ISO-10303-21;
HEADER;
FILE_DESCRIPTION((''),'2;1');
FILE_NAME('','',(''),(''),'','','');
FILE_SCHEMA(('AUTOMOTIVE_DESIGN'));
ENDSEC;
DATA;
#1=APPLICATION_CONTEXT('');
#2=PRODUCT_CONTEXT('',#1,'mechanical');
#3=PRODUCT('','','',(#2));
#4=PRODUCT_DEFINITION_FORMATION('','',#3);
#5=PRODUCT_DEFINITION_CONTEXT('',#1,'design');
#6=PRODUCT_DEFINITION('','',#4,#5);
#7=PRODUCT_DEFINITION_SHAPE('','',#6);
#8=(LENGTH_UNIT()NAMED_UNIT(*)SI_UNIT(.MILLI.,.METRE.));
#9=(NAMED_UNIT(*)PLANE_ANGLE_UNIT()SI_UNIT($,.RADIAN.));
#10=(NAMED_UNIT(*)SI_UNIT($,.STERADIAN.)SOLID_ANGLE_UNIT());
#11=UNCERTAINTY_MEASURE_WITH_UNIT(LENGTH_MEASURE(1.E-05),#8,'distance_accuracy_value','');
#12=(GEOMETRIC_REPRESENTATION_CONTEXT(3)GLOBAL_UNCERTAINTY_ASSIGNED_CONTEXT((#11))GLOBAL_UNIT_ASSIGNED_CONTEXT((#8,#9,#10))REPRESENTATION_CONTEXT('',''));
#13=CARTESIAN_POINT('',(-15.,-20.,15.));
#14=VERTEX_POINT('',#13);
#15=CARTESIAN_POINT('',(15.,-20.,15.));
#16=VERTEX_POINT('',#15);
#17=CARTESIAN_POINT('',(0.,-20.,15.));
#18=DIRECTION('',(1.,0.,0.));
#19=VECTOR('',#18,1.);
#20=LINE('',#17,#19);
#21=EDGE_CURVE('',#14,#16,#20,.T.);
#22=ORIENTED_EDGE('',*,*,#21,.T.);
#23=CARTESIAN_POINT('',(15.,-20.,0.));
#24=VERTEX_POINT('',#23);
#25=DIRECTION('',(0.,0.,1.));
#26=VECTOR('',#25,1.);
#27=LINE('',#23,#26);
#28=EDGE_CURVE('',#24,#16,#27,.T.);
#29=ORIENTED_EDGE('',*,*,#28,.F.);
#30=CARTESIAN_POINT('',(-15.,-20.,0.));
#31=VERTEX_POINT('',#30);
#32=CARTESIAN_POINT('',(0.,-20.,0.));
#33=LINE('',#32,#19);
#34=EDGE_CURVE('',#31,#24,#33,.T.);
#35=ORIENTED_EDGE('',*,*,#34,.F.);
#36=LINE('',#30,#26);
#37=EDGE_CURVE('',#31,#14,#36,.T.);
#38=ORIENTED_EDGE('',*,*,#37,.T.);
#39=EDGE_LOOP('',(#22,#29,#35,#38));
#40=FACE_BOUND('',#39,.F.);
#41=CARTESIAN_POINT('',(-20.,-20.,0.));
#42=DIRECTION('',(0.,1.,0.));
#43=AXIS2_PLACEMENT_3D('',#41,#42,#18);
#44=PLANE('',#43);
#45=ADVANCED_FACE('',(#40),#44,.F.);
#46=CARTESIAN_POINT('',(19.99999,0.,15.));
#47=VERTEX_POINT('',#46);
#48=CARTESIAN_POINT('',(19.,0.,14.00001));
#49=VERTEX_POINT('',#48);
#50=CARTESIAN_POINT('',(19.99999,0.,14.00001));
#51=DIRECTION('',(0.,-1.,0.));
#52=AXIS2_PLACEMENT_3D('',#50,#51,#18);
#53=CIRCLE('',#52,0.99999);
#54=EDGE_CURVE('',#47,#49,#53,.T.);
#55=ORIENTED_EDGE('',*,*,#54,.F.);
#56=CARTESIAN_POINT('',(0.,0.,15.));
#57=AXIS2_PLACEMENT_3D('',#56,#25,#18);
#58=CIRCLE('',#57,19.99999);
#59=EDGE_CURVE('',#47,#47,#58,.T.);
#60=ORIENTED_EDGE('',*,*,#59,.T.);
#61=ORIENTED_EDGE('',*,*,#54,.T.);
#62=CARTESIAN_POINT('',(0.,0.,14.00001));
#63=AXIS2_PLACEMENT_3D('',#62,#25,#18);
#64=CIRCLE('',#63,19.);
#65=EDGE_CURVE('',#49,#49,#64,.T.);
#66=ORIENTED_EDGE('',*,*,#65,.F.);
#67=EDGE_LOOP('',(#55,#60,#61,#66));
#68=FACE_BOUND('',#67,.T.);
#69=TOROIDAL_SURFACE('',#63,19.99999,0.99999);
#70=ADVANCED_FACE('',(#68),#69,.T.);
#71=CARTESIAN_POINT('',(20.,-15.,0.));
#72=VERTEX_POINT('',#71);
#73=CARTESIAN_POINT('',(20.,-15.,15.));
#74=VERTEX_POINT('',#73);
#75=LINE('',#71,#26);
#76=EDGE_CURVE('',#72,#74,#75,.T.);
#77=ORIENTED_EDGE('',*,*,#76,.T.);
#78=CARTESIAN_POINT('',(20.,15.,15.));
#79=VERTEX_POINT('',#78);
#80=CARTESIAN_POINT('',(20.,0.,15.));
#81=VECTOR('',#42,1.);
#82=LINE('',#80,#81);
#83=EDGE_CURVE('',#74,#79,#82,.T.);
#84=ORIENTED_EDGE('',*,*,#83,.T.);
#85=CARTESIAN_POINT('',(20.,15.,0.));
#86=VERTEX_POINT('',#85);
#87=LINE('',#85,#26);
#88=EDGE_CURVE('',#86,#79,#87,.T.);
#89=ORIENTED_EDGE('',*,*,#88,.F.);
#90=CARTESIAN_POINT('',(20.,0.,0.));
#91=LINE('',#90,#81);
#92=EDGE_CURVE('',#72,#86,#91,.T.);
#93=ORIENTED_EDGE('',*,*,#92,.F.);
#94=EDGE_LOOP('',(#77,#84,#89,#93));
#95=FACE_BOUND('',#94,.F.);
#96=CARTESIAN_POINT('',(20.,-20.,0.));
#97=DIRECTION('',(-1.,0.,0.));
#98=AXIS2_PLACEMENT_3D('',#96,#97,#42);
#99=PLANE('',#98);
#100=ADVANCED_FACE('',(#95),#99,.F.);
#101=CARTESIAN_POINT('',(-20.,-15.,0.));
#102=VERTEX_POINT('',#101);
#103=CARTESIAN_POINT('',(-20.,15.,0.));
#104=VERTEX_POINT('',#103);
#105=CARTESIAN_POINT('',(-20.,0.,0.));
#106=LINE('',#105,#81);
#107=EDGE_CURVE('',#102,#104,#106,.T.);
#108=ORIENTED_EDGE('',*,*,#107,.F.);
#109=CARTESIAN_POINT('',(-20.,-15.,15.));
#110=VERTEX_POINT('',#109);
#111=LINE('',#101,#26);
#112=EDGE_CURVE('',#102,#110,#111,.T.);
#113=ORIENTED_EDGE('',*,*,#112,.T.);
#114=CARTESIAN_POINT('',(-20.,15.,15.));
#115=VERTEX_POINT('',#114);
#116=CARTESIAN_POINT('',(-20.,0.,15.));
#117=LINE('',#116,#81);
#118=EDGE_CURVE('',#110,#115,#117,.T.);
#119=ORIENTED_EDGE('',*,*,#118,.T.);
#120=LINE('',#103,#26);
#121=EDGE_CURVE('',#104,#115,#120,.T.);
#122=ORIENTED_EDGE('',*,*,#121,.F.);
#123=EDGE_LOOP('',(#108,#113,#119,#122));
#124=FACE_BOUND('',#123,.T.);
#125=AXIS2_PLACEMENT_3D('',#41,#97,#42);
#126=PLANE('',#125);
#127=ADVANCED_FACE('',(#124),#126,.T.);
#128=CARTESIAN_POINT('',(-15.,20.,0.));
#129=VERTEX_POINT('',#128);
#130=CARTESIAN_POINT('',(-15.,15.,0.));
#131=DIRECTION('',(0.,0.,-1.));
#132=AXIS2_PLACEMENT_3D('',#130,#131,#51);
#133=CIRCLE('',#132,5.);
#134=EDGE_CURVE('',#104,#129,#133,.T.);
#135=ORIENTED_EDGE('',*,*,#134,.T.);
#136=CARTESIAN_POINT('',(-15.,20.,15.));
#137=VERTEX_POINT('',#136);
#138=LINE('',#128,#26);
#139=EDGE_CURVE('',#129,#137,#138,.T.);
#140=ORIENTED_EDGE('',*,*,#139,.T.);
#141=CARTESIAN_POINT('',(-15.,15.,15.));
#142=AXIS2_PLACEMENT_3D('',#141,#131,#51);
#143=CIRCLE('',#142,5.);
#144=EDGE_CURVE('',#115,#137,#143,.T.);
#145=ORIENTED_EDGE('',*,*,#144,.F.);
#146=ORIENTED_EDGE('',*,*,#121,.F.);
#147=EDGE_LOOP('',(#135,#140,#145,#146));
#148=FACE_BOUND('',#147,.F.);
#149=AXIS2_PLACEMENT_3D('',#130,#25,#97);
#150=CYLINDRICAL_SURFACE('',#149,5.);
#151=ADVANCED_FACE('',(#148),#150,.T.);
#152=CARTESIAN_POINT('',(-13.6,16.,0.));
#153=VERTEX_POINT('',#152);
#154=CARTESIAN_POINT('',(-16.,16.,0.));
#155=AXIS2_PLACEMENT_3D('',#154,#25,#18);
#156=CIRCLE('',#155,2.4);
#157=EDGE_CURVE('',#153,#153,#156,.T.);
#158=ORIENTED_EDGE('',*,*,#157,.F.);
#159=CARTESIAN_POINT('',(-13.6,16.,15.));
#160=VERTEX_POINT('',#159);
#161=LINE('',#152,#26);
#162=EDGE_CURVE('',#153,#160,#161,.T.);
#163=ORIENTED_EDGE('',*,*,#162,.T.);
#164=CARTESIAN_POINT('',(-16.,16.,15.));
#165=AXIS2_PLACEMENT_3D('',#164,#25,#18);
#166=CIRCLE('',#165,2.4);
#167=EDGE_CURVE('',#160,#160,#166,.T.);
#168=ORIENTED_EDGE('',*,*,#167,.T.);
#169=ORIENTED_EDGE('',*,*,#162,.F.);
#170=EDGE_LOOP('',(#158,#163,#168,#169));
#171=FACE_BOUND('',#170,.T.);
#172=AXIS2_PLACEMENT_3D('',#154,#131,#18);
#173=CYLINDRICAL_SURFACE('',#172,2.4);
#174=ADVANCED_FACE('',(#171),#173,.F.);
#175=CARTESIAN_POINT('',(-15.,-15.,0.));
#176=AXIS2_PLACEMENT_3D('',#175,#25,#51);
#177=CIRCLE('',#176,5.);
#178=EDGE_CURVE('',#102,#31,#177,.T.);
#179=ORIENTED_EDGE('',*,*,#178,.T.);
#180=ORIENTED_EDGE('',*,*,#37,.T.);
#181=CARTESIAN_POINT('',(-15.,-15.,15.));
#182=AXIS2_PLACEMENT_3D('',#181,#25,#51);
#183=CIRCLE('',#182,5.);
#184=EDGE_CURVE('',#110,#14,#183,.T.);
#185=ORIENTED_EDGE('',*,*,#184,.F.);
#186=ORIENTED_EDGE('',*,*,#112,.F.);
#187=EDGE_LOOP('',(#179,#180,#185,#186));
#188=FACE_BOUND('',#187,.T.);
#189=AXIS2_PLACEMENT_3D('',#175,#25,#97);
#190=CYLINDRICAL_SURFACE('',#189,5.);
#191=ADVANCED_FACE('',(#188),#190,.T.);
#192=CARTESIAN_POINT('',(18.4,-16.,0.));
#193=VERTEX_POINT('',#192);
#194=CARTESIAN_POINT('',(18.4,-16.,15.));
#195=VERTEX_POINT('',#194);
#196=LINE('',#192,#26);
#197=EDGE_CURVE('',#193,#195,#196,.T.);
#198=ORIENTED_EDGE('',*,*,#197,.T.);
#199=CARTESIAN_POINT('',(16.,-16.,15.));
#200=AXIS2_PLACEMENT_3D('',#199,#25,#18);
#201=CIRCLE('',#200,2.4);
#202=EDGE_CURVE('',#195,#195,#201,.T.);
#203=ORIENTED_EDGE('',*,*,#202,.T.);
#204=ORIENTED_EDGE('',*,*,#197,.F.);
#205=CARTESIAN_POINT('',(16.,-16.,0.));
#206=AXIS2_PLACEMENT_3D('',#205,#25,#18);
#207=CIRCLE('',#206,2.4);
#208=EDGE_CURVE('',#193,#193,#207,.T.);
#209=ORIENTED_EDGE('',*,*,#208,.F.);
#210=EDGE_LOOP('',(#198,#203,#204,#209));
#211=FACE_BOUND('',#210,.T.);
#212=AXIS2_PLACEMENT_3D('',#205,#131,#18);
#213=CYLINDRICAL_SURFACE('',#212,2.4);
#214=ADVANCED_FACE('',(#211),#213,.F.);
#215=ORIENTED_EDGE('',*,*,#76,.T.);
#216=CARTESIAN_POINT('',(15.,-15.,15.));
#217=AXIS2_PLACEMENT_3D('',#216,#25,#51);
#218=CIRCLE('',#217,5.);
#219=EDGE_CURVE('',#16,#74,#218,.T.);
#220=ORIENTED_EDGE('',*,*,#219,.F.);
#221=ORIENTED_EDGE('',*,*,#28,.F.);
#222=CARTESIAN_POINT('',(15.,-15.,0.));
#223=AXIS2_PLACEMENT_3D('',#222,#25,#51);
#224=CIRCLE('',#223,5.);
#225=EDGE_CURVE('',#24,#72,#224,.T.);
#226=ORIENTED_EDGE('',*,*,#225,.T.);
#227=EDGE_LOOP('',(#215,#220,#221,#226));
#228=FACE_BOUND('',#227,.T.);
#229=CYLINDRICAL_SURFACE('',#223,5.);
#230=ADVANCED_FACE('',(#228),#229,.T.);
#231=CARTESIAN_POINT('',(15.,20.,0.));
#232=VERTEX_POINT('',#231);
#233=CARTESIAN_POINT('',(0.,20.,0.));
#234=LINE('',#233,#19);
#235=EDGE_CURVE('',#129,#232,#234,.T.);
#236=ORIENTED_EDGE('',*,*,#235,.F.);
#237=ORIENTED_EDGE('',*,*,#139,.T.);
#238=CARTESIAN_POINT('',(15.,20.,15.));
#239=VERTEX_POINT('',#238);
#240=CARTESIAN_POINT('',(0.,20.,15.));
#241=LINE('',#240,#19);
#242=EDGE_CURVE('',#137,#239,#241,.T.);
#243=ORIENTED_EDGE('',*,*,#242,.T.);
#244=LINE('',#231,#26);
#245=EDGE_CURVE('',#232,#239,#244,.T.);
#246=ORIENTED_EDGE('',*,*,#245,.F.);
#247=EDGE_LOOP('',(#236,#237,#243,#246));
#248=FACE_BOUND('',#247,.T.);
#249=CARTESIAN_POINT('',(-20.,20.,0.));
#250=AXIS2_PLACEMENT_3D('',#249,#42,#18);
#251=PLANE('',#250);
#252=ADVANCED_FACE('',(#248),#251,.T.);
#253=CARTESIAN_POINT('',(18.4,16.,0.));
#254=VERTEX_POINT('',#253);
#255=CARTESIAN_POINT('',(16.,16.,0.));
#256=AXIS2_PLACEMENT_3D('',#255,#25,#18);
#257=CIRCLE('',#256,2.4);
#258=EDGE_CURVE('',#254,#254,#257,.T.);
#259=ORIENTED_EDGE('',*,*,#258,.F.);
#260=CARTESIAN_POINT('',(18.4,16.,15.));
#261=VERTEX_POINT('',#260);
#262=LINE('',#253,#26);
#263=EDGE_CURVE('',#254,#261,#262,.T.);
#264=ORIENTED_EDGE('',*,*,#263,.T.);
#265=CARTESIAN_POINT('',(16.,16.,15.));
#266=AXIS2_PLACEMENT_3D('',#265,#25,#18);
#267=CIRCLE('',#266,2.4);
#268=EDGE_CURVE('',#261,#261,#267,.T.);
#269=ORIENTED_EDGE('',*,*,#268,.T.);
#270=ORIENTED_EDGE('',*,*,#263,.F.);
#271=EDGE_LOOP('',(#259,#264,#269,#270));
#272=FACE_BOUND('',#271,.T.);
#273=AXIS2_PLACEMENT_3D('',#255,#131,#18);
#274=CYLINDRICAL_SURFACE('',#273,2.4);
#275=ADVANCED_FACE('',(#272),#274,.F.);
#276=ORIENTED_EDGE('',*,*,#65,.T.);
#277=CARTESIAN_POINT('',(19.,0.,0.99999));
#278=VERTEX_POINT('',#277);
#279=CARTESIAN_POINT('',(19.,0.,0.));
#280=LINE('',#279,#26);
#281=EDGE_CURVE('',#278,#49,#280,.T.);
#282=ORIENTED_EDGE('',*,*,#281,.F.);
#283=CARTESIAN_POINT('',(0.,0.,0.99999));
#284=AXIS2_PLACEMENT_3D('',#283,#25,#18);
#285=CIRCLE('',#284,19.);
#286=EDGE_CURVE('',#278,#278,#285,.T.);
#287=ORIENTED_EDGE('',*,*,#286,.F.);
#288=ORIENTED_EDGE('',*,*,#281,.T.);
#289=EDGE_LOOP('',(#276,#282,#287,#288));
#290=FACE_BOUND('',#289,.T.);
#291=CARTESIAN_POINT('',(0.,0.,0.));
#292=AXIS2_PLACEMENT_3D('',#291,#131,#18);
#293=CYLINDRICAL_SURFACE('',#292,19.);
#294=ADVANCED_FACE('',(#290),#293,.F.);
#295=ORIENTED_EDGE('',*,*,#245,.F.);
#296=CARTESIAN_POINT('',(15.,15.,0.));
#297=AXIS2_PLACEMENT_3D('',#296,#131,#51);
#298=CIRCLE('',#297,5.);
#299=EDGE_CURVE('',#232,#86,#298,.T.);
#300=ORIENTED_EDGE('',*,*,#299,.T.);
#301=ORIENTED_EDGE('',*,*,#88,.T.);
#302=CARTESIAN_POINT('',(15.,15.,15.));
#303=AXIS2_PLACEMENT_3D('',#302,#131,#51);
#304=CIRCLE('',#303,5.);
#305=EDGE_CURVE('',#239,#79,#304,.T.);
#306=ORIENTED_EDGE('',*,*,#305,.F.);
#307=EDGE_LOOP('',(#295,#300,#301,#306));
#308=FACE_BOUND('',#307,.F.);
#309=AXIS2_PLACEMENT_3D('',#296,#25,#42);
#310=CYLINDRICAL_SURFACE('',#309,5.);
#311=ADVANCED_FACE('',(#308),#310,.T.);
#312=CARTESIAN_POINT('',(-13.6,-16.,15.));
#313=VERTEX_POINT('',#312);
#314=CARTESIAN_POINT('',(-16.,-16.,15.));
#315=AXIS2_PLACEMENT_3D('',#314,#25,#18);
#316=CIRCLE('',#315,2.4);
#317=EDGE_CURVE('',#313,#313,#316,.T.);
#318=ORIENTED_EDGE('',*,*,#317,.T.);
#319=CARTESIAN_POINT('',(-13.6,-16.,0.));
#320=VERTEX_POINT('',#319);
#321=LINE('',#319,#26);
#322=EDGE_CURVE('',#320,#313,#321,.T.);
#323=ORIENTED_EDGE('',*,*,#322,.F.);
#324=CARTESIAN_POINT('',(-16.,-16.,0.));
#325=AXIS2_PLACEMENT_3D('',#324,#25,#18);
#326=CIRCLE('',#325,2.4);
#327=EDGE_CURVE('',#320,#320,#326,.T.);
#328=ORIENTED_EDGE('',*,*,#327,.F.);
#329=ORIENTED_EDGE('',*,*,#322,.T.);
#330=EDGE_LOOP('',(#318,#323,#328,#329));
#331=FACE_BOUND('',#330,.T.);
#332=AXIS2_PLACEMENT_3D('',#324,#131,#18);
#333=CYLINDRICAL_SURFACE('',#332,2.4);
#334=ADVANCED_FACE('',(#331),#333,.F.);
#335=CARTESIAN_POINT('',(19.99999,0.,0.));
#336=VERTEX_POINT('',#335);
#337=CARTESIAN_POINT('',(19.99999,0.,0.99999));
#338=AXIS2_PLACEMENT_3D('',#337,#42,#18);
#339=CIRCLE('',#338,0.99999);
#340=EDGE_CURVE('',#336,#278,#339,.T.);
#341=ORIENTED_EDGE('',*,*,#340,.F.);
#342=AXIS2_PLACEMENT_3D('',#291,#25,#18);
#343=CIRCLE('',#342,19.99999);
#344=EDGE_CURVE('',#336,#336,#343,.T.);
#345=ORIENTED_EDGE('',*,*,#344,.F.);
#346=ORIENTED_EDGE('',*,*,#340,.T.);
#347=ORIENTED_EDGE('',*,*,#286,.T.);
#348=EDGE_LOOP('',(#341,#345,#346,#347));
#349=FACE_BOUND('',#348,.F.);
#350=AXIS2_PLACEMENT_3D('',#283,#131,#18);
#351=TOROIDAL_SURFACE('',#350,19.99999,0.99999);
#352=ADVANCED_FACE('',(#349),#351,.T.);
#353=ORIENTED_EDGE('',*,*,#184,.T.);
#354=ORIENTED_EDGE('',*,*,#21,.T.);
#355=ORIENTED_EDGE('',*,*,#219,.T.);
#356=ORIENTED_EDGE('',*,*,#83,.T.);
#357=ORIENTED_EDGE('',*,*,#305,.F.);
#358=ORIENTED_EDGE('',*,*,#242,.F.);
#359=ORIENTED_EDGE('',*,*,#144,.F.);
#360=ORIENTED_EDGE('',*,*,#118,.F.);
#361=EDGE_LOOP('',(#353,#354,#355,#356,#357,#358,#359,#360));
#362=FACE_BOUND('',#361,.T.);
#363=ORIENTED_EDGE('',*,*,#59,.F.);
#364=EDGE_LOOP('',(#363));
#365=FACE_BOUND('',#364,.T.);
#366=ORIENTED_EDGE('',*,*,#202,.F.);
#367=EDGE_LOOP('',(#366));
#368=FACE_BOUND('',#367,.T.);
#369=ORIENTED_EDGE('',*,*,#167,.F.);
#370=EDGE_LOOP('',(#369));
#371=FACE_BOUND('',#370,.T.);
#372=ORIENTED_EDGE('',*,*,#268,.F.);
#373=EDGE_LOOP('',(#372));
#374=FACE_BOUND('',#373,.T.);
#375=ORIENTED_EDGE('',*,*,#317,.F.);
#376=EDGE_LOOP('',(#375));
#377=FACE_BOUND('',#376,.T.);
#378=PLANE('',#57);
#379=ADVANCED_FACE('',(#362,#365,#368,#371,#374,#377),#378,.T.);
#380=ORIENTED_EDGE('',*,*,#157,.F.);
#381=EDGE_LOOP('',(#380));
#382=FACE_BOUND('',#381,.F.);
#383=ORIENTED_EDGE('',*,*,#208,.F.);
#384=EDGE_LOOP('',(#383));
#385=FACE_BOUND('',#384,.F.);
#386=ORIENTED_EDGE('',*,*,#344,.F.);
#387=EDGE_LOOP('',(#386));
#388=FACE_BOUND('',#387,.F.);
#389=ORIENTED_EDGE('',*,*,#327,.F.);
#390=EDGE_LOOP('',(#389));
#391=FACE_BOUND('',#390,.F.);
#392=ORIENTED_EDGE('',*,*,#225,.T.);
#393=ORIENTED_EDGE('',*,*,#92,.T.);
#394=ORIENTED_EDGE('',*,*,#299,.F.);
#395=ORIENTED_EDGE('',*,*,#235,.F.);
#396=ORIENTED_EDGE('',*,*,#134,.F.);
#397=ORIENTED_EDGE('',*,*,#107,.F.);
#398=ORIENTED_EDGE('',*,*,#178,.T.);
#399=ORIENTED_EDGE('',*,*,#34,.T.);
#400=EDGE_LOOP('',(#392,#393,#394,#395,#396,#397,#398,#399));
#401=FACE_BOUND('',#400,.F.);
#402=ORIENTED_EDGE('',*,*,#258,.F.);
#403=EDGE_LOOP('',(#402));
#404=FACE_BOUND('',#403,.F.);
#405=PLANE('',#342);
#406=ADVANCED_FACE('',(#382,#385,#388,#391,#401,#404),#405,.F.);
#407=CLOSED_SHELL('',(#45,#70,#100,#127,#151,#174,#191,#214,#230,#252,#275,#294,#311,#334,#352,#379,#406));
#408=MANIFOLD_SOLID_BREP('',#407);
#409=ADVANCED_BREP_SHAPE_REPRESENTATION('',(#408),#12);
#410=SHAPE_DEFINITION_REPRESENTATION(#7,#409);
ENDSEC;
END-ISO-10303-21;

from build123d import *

# Parameters (mm, degrees)
F0_W     = 40
F0_H     = 40
F0_R     = 2.4
F0_R_2   = 19
F1_DEPTH = 15
F2_R     = 5
F3_R     = 0.99999


# Not quite as in the source:
# - a fillet or chamfer is up to 0.001 mm smaller than in the source, because OpenCascade refuses the exact size


with BuildPart() as f1:
    # F0 (on Top) → F1 (new body)
    with BuildSketch(Plane.XY):
        Rectangle(F0_W, F0_H)
        with Locations((-16, -16)):
            Circle(F0_R, mode=Mode.SUBTRACT)
        with Locations((16, -16)):
            Circle(F0_R, mode=Mode.SUBTRACT)
        with Locations((-16, 16)):
            Circle(F0_R, mode=Mode.SUBTRACT)
        Circle(F0_R_2, mode=Mode.SUBTRACT)
        with Locations((16, 16)):
            Circle(F0_R, mode=Mode.SUBTRACT)
    extrude(amount=F1_DEPTH)

    # F2
    f2_edges = [f1.edges().sort_by_distance(p)[0] for p in [
        (20, 20, 7.5),
        (20, -20, 7.5),
        (-20, 20, 7.5),
        (-20, -20, 7.5),
    ]]
    fillet(f2_edges, radius=F2_R)

    # F3 (radius 1 in the source; OpenCascade refuses exactly that, so slightly less here)
    f3_edges = [f1.edges().sort_by_distance(p)[0] for p in [
        (-19, 0, 15),
        (-19, 0, 0),
    ]]
    fillet(f3_edges, radius=F3_R)


solid = f1.part
